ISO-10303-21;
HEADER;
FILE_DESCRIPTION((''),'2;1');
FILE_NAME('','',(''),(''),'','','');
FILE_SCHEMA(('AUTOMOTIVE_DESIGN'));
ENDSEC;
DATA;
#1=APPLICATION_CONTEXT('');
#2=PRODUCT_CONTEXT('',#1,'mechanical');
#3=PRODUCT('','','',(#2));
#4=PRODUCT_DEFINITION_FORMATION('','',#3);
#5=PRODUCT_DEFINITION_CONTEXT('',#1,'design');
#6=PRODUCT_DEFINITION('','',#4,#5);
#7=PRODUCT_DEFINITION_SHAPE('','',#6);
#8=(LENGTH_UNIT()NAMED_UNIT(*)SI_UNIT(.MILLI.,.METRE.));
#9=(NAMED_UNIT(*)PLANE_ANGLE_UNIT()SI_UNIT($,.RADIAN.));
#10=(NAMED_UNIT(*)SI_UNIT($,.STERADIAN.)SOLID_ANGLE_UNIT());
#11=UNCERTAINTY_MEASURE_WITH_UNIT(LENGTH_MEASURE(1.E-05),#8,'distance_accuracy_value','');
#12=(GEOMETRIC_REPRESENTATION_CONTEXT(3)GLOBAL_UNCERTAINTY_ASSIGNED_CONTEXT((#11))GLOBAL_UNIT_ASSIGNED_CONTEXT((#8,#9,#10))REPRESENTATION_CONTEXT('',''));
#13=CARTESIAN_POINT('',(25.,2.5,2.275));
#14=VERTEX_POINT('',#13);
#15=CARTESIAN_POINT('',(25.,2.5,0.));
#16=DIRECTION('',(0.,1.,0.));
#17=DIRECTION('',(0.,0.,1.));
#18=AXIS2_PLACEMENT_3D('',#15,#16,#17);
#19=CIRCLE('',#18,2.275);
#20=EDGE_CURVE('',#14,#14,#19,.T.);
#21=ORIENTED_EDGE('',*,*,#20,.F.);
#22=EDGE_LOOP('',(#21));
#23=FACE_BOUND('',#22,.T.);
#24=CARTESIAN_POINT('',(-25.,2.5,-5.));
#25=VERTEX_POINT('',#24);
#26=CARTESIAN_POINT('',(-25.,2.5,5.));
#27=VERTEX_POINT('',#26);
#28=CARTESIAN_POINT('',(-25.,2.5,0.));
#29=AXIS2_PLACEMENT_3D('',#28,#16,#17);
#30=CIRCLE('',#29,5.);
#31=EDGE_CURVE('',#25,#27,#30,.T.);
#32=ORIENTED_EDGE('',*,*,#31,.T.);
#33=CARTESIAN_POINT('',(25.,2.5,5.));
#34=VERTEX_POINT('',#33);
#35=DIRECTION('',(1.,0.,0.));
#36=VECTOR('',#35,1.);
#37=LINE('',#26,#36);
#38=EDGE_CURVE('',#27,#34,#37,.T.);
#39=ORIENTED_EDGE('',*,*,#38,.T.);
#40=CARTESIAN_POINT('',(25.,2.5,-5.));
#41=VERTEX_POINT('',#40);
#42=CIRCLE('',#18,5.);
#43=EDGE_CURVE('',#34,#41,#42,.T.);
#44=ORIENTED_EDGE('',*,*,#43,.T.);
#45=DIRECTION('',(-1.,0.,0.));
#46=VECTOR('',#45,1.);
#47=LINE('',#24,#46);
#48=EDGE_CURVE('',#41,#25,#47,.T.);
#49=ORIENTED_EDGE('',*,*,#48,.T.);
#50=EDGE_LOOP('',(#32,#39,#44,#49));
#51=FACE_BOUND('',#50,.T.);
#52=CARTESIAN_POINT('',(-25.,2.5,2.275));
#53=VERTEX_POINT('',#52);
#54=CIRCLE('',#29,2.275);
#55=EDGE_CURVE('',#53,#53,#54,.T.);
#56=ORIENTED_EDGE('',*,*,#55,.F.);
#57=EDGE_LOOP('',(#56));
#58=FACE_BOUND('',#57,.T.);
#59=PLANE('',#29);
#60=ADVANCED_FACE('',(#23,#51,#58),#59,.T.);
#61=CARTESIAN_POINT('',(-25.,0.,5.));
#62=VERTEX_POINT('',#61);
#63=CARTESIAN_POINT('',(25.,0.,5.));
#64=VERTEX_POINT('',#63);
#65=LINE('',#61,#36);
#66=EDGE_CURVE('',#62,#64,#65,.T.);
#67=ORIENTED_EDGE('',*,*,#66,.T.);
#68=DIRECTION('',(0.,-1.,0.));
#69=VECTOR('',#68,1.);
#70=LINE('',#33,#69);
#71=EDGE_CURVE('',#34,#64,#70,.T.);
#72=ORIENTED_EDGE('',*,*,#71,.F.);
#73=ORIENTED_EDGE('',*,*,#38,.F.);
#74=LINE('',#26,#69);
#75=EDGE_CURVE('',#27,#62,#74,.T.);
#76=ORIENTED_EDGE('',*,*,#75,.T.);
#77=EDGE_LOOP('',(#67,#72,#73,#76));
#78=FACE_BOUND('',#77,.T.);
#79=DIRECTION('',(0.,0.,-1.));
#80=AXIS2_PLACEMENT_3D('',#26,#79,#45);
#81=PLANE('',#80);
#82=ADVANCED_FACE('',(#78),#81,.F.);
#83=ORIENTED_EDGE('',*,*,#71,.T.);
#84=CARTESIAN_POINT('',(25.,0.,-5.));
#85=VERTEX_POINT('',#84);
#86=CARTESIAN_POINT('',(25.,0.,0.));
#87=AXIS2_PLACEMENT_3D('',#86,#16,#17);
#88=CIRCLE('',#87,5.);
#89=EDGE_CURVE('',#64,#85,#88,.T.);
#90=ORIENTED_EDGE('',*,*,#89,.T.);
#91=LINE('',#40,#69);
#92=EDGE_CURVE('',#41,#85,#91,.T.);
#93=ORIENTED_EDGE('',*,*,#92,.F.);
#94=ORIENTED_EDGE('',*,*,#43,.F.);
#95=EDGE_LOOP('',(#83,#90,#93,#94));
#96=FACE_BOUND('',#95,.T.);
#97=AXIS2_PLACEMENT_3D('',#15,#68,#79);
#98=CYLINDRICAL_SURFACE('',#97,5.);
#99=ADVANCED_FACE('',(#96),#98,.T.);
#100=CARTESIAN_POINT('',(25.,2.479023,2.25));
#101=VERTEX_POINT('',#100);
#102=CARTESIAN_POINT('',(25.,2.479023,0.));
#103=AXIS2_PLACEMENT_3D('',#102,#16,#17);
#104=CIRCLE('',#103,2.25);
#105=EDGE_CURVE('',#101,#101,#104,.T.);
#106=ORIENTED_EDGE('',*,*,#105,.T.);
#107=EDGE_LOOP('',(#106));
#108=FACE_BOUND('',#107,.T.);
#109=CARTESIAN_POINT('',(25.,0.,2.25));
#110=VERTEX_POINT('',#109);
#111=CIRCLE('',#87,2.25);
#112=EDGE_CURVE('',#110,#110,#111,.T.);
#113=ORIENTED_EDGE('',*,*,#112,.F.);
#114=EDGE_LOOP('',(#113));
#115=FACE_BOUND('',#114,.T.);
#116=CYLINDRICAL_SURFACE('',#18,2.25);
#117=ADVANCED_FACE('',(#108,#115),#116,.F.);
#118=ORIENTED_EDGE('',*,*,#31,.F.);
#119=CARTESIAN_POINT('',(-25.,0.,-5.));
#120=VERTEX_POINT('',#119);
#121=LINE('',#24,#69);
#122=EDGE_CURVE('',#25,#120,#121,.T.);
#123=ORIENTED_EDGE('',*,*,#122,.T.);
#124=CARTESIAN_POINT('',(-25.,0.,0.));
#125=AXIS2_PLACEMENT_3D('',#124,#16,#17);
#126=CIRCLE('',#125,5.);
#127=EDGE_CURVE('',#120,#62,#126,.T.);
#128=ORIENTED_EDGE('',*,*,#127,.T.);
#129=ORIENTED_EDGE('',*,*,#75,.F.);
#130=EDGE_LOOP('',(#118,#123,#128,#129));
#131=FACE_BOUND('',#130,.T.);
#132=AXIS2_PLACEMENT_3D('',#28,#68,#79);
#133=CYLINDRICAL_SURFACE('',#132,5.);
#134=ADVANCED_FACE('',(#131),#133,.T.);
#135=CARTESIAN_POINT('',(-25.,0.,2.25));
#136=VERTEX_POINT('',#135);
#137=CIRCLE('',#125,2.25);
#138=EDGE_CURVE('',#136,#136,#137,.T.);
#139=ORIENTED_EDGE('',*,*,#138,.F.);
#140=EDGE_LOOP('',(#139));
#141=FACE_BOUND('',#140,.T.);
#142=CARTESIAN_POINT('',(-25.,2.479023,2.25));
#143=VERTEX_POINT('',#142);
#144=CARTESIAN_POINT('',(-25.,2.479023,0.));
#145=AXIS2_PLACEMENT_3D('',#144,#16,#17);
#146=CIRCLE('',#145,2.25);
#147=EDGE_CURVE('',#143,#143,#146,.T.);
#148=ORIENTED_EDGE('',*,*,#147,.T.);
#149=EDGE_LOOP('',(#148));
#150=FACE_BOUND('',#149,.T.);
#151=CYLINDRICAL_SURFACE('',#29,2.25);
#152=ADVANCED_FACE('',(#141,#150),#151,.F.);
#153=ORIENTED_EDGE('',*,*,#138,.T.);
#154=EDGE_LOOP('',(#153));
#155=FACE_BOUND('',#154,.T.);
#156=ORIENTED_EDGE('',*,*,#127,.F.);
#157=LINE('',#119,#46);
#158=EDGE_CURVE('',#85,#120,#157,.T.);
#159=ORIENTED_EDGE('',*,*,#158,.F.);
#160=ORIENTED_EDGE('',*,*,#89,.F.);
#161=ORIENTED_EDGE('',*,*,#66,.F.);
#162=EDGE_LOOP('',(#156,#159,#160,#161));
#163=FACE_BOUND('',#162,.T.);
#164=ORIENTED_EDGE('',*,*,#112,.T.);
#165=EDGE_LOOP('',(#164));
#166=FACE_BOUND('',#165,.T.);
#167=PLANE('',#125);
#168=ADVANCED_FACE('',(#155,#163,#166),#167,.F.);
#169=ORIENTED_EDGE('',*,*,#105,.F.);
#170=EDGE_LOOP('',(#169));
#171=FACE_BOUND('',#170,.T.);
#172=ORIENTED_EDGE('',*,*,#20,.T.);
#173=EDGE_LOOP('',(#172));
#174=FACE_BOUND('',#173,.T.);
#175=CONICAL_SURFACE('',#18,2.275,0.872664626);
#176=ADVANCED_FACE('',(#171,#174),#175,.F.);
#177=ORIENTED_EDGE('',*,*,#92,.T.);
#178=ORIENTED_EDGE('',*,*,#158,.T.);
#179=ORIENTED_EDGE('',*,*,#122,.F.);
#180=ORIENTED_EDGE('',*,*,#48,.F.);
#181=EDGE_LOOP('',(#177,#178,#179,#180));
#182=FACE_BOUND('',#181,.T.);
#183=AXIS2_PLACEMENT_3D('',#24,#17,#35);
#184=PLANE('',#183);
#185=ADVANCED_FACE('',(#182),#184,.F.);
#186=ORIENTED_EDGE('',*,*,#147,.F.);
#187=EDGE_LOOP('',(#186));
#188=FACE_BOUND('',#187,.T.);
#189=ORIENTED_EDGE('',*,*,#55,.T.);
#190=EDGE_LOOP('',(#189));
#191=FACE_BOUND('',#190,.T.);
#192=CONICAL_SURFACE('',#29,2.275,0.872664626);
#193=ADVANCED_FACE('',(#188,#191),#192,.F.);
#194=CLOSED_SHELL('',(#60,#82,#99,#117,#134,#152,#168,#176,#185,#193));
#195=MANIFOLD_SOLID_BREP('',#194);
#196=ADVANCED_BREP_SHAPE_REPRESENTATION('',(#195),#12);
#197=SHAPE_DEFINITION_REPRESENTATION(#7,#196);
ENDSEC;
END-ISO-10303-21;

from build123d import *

# Parameters (mm, degrees)
BOSS_EXTRUDE1_DEPTH = 2.5


# Read off the part's stored shape, not the designer's step: M4 Clearance Hole1
with BuildPart() as part:
    # Sketch1 → Boss-Extrude1 (new body)
    with BuildSketch(Plane(origin=(0, 0, 0), x_dir=(1, 0, 0), z_dir=(0, 1, 0))):
        with BuildLine():
            Line((-25, 5), (25, 5))
            ThreePointArc((25, 5), (30, 0), (25, -5))
            Line((25, -5), (-25, -5))
            ThreePointArc((-25, -5), (-30, 0), (-25, 5))
        make_face()
    extrude(amount=BOSS_EXTRUDE1_DEPTH)

    # M4 Clearance Hole1 outline → M4 Clearance Hole1 (revolve, cut)
    with BuildSketch(Plane(origin=(-25, 0, 0), x_dir=(1, 0, 0), z_dir=(0, 0, 1))):
        Polygon((0, 0), (2.25, 0), (2.25, 2.479022509), (2.275, 2.5), (0, 2.5), align=None)
    revolve(axis=Axis((-25, 0, 0), (0, 1, 0)), mode=Mode.SUBTRACT)

    # M4 Clearance Hole1 2 outline → M4 Clearance Hole1 2 (revolve, cut)
    with BuildSketch(Plane(origin=(25, 0, 0), x_dir=(1, 0, 0), z_dir=(0, 0, 1))):
        Polygon((0, 0), (2.25, 0), (2.25, 2.479022509), (2.275, 2.5), (0, 2.5), align=None)
    revolve(axis=Axis((25, 0, 0), (0, 1, 0)), mode=Mode.SUBTRACT)


solid = part.part
